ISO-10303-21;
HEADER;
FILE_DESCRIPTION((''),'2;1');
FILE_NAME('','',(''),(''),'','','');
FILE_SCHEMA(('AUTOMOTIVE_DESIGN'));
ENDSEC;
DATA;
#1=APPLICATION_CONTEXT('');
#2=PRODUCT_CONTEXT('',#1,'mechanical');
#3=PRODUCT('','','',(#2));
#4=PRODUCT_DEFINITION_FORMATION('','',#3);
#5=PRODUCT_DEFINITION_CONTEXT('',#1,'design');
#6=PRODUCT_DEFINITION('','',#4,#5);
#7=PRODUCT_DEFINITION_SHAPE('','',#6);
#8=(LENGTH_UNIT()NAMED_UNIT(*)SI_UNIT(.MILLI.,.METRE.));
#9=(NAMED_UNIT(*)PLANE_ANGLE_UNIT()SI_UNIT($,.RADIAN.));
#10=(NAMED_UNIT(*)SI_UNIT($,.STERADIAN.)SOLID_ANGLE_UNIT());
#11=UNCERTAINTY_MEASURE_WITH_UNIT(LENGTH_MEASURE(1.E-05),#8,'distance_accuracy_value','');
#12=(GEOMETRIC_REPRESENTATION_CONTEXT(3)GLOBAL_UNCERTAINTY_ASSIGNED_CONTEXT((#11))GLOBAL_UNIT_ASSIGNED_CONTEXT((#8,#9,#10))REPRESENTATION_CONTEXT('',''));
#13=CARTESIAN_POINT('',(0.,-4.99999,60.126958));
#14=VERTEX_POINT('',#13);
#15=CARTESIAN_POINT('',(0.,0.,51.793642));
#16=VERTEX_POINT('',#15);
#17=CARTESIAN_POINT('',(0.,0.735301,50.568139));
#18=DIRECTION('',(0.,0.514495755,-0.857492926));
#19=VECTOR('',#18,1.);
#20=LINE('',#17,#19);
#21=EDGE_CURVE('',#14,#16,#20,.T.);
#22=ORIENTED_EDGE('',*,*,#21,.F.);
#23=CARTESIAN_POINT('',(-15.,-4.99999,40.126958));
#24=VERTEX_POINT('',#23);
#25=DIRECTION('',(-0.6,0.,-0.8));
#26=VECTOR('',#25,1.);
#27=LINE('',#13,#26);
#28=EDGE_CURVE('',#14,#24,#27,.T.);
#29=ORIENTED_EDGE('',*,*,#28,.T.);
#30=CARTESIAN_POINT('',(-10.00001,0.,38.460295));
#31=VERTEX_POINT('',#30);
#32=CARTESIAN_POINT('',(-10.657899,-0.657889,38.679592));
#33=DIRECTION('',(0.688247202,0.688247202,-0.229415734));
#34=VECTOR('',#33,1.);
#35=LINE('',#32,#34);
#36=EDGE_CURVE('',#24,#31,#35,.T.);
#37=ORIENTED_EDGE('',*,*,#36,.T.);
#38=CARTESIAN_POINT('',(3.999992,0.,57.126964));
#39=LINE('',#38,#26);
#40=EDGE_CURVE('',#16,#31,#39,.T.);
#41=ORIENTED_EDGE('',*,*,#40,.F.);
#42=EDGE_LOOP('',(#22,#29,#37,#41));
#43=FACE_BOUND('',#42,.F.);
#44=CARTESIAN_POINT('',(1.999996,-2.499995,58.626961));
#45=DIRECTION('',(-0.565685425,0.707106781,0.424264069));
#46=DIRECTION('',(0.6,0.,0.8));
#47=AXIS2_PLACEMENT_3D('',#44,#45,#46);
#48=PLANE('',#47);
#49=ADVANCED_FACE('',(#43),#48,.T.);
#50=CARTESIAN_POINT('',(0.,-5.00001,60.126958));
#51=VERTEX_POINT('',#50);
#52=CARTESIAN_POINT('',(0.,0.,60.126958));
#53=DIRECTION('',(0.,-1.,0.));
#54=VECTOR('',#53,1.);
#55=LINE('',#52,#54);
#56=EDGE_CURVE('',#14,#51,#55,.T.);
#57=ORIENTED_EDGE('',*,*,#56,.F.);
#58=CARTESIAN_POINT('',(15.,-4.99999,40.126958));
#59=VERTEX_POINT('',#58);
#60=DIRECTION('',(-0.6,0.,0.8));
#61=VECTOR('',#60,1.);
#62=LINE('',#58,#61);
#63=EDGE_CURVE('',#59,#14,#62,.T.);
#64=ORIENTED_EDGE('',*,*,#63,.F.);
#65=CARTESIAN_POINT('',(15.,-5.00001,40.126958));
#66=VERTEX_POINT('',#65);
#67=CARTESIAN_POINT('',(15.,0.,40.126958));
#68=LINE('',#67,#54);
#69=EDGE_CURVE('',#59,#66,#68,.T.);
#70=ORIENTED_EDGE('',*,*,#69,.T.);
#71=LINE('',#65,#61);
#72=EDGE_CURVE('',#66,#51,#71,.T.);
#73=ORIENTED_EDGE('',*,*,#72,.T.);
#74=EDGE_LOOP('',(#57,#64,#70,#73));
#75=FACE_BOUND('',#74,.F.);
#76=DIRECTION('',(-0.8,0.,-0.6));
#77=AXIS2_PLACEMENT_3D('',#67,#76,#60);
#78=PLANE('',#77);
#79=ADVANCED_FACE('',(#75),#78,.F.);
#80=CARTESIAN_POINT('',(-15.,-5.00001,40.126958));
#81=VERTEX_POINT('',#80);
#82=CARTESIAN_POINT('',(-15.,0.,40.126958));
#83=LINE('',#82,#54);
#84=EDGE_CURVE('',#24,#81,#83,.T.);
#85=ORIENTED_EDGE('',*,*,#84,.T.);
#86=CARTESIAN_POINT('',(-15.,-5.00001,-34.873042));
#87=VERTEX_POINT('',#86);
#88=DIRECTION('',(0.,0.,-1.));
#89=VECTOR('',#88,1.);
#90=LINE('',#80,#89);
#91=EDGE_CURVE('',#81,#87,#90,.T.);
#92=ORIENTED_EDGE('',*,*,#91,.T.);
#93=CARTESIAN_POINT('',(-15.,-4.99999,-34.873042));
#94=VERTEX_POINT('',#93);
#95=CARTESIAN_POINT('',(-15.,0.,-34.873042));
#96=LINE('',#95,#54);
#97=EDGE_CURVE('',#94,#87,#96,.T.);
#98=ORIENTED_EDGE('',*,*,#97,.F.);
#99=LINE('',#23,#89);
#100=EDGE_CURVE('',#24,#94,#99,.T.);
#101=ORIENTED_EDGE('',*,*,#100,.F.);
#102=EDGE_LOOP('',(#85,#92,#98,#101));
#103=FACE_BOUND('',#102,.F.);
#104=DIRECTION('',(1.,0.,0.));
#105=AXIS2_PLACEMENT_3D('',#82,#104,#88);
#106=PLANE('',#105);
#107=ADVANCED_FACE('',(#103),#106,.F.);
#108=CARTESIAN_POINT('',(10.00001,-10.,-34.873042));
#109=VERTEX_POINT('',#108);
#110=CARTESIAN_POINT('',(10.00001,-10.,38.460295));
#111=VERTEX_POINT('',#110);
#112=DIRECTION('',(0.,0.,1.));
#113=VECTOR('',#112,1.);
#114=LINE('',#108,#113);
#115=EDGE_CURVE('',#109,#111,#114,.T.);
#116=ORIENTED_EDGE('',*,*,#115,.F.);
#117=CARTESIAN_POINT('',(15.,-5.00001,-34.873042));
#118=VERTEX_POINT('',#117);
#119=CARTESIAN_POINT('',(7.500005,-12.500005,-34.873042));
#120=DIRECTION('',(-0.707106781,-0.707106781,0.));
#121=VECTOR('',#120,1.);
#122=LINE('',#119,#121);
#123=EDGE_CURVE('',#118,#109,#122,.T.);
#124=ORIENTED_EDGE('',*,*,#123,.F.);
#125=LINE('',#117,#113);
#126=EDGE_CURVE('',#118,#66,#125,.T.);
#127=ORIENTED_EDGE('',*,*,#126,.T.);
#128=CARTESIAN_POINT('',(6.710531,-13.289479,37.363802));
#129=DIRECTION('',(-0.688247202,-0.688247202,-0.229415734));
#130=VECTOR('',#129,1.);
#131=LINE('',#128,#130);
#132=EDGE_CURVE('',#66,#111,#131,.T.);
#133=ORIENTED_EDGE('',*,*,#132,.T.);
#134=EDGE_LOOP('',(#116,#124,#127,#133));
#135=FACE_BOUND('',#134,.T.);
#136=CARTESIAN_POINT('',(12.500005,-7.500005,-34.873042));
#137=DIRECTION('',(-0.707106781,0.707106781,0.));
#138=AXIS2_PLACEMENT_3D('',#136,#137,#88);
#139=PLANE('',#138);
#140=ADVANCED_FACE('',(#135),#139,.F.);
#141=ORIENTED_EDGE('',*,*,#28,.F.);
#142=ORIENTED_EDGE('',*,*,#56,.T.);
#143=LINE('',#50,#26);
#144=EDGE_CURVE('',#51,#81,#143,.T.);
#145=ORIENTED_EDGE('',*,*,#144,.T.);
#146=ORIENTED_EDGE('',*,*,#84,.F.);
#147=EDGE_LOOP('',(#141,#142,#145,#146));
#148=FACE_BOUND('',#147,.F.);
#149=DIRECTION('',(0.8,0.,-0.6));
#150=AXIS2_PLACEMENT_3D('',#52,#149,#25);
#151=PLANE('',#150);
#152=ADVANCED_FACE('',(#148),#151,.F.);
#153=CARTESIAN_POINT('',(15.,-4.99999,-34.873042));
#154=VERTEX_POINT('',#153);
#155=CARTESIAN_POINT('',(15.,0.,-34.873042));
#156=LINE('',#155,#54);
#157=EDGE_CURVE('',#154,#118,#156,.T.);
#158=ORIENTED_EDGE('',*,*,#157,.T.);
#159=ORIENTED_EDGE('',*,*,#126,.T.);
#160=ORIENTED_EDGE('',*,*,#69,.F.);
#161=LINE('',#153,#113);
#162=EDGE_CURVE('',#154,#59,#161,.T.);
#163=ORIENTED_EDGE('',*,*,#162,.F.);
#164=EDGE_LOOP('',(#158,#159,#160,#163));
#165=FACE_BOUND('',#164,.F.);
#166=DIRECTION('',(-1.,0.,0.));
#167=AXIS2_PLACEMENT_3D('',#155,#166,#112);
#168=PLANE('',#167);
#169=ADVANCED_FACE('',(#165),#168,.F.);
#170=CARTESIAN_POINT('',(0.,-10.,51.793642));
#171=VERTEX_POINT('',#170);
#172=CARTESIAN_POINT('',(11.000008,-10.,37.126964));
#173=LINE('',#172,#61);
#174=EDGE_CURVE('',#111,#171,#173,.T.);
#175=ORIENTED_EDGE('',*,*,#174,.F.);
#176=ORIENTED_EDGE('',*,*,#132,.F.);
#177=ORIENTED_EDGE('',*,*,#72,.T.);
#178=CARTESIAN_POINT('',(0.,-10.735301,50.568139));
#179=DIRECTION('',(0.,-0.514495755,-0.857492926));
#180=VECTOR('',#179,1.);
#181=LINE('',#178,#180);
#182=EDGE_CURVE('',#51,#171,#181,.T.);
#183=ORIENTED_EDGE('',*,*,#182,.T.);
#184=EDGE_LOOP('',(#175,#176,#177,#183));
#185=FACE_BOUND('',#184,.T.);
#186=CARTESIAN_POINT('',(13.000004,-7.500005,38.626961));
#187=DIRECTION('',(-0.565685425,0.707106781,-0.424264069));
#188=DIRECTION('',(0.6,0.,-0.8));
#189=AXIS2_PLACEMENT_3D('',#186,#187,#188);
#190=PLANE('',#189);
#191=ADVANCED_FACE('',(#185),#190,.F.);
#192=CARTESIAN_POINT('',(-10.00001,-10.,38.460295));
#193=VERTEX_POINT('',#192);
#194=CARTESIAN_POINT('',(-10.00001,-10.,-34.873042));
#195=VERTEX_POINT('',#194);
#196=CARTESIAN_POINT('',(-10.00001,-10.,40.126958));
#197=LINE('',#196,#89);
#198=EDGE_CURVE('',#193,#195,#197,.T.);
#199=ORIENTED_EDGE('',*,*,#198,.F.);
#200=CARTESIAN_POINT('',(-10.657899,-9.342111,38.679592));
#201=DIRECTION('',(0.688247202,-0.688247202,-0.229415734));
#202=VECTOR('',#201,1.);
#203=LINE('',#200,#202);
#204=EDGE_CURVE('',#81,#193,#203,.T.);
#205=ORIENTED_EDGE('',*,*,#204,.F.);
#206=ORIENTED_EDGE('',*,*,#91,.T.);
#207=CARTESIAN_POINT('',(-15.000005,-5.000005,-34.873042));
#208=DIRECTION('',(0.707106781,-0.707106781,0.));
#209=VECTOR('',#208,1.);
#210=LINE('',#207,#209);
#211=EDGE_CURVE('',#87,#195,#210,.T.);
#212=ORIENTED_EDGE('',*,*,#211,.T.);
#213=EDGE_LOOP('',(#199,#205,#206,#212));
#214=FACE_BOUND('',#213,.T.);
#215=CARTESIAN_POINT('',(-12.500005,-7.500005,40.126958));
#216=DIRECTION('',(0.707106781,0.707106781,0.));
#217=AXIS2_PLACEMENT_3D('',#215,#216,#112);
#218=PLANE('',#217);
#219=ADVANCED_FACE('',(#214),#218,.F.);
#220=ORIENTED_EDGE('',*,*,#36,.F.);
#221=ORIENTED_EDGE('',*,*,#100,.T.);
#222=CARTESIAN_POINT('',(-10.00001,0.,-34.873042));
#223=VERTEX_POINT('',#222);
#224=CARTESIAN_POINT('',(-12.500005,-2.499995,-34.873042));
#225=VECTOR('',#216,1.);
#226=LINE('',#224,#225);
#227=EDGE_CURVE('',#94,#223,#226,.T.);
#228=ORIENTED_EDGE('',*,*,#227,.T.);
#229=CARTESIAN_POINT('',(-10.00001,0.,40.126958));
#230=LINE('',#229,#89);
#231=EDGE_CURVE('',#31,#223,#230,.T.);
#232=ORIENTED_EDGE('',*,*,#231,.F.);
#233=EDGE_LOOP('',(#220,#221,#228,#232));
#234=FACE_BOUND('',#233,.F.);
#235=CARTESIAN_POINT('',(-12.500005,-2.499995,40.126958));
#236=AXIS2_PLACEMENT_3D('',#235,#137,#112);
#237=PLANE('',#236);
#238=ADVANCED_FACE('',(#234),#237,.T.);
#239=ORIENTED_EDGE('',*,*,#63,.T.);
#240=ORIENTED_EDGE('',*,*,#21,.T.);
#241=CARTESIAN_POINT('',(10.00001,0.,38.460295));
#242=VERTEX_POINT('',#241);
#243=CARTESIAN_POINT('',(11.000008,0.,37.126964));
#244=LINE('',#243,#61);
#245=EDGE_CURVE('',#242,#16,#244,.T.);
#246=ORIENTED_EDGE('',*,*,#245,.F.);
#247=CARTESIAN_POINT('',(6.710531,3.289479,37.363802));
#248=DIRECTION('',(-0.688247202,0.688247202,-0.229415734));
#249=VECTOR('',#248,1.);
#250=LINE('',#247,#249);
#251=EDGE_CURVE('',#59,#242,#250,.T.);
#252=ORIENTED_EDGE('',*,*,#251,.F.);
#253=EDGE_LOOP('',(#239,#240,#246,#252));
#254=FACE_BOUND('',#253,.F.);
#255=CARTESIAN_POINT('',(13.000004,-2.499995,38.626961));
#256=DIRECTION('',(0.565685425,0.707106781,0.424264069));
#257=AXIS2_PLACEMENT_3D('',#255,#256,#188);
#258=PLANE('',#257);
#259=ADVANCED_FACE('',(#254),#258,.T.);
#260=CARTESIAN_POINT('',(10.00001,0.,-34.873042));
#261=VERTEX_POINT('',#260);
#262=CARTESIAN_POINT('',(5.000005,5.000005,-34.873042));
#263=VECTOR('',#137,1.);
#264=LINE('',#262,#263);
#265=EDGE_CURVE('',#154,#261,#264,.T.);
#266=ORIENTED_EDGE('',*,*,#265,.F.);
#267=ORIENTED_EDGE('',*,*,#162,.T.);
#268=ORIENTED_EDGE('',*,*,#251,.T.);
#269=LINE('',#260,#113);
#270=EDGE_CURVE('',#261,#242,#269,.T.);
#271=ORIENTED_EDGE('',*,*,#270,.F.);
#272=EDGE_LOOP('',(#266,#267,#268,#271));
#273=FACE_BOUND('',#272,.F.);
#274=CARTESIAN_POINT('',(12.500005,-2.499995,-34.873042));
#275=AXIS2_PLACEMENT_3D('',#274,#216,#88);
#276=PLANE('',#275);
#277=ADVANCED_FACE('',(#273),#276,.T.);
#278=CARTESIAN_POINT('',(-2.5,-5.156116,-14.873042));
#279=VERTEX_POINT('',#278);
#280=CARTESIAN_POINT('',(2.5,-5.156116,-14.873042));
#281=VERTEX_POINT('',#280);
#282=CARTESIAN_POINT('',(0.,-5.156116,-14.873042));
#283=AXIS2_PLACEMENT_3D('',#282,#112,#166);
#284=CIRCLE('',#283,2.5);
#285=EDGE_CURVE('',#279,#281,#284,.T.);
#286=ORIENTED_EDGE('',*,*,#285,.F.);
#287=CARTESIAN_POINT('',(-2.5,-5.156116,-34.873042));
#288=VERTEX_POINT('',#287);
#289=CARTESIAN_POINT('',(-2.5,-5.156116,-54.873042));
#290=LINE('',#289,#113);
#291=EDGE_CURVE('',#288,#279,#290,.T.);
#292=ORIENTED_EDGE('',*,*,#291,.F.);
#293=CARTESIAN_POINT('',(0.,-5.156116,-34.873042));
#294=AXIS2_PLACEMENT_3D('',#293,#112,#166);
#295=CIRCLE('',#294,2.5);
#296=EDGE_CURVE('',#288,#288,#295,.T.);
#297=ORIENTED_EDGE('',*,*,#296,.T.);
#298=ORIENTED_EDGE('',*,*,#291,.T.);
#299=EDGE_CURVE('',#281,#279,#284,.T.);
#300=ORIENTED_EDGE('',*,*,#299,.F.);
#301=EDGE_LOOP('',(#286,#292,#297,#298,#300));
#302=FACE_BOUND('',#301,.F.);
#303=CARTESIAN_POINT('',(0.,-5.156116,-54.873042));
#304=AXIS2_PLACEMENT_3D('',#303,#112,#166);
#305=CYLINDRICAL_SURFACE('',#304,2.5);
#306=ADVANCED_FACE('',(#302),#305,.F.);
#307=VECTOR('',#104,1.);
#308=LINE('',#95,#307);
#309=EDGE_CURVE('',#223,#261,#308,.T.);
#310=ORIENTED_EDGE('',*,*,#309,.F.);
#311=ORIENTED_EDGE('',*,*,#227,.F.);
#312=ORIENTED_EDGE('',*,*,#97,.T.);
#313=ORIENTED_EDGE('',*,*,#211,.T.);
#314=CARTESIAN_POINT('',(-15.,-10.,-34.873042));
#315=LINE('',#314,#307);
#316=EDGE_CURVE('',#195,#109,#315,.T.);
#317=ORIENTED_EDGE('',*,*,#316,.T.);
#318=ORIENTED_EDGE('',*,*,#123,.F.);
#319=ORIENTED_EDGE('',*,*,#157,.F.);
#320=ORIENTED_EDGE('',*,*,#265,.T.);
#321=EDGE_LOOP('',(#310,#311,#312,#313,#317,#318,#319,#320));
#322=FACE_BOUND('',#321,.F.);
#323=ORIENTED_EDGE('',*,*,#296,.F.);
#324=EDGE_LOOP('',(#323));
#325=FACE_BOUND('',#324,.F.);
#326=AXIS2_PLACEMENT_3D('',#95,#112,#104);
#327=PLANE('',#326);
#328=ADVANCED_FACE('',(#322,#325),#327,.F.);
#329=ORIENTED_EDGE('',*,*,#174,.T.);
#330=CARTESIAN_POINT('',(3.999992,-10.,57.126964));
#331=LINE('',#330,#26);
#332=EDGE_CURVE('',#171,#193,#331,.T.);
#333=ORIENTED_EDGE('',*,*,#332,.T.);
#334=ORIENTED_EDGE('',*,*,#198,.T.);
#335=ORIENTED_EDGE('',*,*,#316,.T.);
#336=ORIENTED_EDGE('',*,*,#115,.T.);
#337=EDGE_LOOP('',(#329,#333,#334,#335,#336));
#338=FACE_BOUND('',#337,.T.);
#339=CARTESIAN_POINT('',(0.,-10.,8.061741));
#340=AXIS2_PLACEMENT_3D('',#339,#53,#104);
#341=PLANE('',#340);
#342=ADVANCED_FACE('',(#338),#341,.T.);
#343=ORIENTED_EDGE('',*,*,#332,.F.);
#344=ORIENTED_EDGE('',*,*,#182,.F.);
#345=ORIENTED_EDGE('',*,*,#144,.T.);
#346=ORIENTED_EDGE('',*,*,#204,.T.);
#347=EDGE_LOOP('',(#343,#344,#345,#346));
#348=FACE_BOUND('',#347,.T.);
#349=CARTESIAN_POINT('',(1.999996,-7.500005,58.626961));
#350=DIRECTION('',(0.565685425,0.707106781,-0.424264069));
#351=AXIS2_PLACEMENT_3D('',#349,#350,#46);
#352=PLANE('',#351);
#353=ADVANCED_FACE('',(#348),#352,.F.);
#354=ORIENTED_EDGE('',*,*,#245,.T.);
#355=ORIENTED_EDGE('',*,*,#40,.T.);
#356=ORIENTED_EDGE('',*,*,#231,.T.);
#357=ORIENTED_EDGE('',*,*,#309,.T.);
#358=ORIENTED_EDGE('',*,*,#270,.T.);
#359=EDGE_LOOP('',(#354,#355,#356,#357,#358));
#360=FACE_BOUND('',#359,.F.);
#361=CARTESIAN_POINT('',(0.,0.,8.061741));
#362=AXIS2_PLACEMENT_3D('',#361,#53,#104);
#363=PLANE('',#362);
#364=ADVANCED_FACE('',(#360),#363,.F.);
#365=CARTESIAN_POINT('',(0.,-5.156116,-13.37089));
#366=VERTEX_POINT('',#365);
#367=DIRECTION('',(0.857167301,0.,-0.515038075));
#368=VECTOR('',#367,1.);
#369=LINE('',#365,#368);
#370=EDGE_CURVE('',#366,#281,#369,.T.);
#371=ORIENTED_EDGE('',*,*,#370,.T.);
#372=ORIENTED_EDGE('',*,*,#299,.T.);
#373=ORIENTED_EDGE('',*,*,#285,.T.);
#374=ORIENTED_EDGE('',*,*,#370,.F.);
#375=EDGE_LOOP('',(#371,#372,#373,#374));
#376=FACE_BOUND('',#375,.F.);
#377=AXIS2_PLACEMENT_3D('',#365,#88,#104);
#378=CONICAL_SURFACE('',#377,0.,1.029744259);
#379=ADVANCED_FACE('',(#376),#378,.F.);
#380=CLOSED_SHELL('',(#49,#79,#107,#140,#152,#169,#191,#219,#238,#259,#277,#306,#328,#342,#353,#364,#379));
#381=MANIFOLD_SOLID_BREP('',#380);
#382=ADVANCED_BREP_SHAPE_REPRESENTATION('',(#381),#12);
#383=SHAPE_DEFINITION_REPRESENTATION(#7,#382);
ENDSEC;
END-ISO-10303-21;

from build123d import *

# Parameters (mm, degrees)
F1_DEPTH = 10
F2_SIZE  = 4.99999
F4_D     = 5
F4_DEPTH = 20
F4_TIP   = 1.5021515476


# Not quite as in the source:
# - a fillet or chamfer is up to 0.001 mm smaller than in the source, because OpenCascade refuses the exact size


with BuildPart() as f1:
    # F0 (on Front) → F1 (new body)
    with BuildSketch(Plane.XZ):
        Polygon((0, 60.1269584066), (-15, 40.1269584066), (-15, -34.8730415934), (15, -34.8730415934), (15, 40.1269584066), align=None)
    extrude(amount=F1_DEPTH)

    # F2 (size 5 in the source; OpenCascade refuses exactly that, so slightly less here)
    f2_edges = [f1.edges().sort_by_distance(p)[0] for p in [
        (-15, -10, 2.626958),
        (-15, 0, 2.626958),
        (-7.5, -10, 50.126958),
        (-7.5, 0, 50.126958),
        (7.5, -10, 50.126958),
        (7.5, 0, 50.126958),
        (15, -10, 2.626958),
        (15, 0, 2.626958),
    ]]
    chamfer(f2_edges, length=F2_SIZE)

    # F4
    with Locations(Plane(origin=(0, 0, -34.8730415934), x_dir=(1, 0, 0), z_dir=(0, 0, -1))):
        with Locations((0, 5.1561156288)):
            Hole(F4_D / 2, depth=F4_DEPTH)
            with Locations((0, 0, -(F4_DEPTH + F4_TIP / 2))):  # 118° drill point
                Cone(0, F4_D / 2, F4_TIP, mode=Mode.SUBTRACT)


solid = f1.part
